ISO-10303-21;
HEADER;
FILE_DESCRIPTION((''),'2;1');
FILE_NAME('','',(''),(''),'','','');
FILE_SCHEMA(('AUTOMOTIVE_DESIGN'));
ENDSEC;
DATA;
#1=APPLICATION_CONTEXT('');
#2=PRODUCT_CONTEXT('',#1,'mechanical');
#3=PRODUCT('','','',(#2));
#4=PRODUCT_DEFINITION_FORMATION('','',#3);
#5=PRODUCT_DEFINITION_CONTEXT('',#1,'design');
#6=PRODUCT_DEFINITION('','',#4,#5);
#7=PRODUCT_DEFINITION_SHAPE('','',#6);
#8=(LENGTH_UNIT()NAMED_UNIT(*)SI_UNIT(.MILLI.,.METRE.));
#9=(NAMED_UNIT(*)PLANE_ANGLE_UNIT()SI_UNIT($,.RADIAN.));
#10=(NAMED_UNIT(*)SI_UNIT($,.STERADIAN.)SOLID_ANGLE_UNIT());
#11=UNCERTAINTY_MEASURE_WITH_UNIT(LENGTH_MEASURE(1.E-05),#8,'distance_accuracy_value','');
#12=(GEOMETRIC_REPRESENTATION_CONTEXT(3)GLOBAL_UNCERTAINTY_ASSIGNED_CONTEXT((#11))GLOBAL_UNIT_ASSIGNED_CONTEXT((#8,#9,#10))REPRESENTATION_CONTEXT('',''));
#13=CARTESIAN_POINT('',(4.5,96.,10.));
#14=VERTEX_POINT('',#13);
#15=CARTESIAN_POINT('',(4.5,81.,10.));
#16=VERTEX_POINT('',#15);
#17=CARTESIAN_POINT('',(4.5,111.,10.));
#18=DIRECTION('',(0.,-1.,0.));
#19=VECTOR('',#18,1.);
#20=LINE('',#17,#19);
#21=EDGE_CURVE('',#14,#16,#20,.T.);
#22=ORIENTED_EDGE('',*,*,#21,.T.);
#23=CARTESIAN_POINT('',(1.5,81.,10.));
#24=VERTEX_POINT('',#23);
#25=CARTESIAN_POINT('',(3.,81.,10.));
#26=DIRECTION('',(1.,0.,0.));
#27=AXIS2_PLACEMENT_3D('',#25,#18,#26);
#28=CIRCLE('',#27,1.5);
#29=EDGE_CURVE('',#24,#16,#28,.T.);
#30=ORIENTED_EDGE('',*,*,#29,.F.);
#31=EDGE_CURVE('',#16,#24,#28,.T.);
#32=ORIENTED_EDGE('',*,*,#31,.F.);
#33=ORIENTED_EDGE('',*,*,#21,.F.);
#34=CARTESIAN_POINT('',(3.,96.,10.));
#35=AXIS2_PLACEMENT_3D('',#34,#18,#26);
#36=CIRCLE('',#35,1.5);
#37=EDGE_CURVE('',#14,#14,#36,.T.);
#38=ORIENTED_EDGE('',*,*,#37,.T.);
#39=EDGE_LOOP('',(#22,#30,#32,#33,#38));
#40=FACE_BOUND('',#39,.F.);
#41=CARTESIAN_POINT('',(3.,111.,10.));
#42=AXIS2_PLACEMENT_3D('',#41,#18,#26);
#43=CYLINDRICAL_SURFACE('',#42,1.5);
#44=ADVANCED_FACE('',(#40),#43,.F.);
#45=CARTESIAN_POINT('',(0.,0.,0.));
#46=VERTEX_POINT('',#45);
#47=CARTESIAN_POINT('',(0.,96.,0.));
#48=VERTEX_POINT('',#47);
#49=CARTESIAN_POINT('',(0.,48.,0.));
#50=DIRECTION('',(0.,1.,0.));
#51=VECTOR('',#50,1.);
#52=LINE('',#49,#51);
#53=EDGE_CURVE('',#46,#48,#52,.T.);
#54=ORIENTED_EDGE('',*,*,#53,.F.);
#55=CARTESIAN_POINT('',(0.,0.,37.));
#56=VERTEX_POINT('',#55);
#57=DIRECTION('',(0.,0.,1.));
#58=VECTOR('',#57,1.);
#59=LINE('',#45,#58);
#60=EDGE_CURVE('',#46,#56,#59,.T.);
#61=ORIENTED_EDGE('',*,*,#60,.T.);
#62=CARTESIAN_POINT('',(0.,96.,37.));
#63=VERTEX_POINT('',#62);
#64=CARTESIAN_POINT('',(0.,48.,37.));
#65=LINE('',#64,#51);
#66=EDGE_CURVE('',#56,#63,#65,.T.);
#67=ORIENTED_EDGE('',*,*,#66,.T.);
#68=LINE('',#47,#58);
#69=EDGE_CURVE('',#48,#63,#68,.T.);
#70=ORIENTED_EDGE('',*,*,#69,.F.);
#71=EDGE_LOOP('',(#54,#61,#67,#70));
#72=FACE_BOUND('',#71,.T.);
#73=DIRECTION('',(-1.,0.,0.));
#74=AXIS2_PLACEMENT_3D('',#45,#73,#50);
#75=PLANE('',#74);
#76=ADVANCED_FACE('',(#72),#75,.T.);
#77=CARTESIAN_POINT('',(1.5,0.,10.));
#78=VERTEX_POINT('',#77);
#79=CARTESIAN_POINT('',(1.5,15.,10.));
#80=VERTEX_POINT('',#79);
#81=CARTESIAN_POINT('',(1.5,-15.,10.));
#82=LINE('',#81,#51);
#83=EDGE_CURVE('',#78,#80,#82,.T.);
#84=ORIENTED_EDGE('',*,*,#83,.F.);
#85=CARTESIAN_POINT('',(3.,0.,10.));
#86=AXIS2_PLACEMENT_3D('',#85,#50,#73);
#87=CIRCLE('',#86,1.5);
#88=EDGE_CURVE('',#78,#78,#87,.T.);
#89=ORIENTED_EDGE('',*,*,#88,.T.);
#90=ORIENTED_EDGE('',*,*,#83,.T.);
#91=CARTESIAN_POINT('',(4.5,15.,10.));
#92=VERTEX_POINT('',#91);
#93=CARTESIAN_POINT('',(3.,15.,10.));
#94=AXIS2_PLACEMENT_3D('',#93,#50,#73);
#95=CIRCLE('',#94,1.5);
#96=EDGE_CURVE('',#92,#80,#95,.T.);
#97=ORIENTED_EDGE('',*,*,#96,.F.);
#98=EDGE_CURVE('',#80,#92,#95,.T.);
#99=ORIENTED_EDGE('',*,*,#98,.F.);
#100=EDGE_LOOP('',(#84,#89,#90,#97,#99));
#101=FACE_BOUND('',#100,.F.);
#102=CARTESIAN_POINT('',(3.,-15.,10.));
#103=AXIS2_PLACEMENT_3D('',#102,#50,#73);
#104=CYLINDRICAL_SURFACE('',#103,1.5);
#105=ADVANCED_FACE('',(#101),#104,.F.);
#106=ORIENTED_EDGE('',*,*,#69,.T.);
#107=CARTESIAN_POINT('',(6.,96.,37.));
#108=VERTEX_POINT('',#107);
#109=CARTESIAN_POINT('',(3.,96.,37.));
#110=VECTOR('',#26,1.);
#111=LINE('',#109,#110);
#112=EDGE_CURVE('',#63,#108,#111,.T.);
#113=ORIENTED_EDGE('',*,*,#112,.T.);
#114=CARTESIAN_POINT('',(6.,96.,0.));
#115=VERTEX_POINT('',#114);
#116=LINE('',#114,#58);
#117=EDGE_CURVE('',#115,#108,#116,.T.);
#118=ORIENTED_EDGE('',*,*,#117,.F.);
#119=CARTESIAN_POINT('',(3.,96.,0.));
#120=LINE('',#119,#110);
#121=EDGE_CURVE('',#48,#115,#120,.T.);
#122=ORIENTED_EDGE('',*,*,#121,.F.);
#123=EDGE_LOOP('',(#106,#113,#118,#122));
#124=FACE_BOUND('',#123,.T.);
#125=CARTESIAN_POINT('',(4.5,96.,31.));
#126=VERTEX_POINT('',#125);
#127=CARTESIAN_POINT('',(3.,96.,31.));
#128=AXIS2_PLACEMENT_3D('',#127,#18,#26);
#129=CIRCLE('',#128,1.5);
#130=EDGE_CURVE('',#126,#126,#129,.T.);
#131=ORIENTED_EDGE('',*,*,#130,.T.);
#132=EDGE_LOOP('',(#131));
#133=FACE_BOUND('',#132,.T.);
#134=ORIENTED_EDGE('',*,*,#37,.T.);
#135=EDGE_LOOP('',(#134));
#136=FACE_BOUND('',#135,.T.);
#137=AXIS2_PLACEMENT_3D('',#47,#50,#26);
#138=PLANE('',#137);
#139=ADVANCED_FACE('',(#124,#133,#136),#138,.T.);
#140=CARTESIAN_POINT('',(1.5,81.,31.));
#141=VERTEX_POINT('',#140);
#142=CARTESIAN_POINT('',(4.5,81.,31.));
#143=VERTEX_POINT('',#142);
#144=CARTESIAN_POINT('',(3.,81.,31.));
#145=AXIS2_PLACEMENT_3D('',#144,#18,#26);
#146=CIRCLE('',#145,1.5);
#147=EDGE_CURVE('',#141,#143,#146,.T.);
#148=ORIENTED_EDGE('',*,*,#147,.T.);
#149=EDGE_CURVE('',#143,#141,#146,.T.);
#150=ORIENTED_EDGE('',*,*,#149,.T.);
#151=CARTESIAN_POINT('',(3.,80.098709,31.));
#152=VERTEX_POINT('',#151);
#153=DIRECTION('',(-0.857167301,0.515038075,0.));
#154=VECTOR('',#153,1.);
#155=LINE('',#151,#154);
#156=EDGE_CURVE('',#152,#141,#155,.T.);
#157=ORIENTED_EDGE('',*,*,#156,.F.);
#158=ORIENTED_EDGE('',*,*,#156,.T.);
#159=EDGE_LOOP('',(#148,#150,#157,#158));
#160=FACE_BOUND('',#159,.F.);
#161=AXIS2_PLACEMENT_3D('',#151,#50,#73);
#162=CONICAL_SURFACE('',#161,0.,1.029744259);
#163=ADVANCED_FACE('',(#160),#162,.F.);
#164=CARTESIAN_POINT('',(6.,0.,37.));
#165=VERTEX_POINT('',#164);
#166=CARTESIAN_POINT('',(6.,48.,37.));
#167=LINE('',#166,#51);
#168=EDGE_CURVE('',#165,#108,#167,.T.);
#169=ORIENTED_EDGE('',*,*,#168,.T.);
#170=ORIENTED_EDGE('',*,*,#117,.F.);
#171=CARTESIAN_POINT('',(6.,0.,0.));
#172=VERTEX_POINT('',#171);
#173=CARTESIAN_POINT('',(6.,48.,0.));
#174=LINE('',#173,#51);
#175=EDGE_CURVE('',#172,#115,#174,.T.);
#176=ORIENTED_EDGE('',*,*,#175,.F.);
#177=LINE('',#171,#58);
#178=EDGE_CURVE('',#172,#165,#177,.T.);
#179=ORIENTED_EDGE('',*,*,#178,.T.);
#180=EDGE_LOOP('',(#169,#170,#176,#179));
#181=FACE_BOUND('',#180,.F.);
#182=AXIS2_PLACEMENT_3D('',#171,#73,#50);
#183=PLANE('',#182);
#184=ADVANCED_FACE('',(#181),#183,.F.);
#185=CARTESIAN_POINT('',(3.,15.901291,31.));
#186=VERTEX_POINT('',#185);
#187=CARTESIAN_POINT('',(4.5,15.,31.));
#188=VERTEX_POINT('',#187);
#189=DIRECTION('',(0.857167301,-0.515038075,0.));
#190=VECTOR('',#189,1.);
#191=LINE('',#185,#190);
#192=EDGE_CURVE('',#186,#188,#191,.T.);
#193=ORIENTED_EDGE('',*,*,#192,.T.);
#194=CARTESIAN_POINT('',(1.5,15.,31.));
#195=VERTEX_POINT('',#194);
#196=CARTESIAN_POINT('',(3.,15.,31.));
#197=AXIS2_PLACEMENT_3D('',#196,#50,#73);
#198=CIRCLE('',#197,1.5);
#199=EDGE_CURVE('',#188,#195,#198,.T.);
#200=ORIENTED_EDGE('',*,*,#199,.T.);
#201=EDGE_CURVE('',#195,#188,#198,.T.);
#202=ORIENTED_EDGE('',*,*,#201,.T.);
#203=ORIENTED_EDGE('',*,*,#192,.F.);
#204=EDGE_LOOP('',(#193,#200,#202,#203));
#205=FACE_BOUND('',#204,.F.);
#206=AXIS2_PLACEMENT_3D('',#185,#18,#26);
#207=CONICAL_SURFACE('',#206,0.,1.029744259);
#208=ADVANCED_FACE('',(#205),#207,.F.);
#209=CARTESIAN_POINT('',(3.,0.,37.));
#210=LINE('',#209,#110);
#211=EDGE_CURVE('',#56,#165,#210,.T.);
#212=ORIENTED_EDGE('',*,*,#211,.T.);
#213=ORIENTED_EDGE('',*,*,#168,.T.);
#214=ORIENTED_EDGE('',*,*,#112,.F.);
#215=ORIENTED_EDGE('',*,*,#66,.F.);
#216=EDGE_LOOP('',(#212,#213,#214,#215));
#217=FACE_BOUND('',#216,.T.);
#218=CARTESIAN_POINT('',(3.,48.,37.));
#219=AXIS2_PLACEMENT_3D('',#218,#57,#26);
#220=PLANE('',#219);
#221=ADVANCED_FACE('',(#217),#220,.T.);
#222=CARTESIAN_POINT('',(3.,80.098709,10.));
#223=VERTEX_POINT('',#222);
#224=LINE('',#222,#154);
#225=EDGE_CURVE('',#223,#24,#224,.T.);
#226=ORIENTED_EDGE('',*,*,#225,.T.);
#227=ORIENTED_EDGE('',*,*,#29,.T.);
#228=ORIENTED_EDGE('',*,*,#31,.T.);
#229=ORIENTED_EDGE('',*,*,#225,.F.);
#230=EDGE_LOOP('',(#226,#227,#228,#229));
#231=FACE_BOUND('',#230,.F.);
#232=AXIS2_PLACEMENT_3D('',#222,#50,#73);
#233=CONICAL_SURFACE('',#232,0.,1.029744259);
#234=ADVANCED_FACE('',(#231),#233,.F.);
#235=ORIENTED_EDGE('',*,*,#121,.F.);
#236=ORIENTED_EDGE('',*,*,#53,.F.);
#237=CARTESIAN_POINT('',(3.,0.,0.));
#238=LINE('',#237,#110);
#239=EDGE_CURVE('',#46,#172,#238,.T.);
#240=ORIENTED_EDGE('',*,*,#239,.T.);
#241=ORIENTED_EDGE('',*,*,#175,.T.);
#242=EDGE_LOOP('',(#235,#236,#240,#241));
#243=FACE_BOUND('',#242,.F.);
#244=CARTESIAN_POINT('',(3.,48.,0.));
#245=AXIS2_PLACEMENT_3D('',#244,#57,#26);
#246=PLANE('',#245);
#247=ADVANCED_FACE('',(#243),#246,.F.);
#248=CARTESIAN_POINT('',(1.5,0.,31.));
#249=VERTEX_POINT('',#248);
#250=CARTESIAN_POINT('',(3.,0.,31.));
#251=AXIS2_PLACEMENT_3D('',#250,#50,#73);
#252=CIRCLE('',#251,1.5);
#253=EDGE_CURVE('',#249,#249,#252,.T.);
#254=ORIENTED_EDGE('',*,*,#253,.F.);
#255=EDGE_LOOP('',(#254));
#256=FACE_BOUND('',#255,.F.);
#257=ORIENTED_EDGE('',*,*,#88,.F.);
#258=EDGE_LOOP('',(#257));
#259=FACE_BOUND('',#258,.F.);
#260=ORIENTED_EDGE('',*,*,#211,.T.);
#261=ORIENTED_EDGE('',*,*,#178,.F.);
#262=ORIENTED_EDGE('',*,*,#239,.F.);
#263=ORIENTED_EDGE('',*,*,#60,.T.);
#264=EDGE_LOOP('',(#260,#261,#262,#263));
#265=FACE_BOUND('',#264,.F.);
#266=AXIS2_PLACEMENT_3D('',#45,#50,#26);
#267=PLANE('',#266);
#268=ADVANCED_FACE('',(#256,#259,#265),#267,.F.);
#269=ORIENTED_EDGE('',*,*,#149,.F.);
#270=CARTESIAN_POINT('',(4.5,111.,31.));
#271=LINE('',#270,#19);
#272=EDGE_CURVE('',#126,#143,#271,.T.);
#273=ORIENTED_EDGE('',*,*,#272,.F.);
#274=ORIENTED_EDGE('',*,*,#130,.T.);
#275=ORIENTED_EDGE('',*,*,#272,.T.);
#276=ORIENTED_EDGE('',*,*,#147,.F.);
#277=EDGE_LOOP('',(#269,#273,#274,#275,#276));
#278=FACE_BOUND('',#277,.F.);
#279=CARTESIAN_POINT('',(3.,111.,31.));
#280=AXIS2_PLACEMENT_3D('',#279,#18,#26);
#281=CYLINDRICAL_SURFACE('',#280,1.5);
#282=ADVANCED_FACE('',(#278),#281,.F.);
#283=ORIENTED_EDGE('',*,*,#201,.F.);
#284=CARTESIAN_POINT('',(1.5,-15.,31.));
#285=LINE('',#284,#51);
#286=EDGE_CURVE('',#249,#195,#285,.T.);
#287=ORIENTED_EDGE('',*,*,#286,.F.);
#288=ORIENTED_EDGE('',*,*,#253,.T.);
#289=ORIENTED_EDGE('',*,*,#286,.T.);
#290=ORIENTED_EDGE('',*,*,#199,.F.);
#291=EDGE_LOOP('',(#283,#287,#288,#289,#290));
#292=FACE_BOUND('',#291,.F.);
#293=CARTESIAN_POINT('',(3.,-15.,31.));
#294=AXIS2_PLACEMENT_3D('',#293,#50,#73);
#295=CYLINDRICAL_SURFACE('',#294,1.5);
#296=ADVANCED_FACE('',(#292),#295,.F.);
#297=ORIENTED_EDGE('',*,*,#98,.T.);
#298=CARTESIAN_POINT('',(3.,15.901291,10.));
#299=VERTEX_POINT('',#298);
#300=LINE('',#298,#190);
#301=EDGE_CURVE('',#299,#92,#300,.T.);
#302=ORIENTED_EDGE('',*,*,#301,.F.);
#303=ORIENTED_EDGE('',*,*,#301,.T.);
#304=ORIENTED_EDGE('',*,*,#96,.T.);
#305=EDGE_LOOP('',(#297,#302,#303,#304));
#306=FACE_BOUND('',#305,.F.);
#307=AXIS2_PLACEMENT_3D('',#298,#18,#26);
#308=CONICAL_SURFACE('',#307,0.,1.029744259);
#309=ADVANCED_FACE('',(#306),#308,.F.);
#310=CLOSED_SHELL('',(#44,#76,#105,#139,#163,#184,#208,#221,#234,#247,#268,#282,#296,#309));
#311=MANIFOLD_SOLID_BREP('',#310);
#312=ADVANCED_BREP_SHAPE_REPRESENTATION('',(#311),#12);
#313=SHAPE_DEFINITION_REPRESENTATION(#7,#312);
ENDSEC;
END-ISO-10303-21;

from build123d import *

# Parameters (mm, degrees)
F0_W     = 6
F0_H     = 96
F1_DEPTH = 37
F7_D     = 3
F7_DEPTH = 15
F7_TIP   = 0.9012909285
F9_D     = 3
F9_DEPTH = 15
F9_TIP   = 0.9012909285


# Not quite as in the source:
# - a feature of the source that left no trace in its solid (it failed there, or was rolled back) is left out


with BuildPart() as f1:
    # F0 (on Top) → F1 (new body)
    with BuildSketch(Plane.XY):
        with Locations((3, 48)):
            Rectangle(F0_W, F0_H)
    extrude(amount=F1_DEPTH)

    # F7
    with Locations(Plane.XZ):
        with Locations((3, 31), (3, 10)):
            Hole(F7_D / 2, depth=F7_DEPTH)
            with Locations((0, 0, -(F7_DEPTH + F7_TIP / 2))):  # 118° drill point
                Cone(0, F7_D / 2, F7_TIP, mode=Mode.SUBTRACT)

    # F9
    with Locations(Plane(origin=(0, 96, 0), x_dir=(-1, 0, 0), z_dir=(0, 1, 0))):
        with Locations((-3, 10), (-3, 31)):
            Hole(F9_D / 2, depth=F9_DEPTH)
            with Locations((0, 0, -(F9_DEPTH + F9_TIP / 2))):  # 118° drill point
                Cone(0, F9_D / 2, F9_TIP, mode=Mode.SUBTRACT)


solid = f1.part
